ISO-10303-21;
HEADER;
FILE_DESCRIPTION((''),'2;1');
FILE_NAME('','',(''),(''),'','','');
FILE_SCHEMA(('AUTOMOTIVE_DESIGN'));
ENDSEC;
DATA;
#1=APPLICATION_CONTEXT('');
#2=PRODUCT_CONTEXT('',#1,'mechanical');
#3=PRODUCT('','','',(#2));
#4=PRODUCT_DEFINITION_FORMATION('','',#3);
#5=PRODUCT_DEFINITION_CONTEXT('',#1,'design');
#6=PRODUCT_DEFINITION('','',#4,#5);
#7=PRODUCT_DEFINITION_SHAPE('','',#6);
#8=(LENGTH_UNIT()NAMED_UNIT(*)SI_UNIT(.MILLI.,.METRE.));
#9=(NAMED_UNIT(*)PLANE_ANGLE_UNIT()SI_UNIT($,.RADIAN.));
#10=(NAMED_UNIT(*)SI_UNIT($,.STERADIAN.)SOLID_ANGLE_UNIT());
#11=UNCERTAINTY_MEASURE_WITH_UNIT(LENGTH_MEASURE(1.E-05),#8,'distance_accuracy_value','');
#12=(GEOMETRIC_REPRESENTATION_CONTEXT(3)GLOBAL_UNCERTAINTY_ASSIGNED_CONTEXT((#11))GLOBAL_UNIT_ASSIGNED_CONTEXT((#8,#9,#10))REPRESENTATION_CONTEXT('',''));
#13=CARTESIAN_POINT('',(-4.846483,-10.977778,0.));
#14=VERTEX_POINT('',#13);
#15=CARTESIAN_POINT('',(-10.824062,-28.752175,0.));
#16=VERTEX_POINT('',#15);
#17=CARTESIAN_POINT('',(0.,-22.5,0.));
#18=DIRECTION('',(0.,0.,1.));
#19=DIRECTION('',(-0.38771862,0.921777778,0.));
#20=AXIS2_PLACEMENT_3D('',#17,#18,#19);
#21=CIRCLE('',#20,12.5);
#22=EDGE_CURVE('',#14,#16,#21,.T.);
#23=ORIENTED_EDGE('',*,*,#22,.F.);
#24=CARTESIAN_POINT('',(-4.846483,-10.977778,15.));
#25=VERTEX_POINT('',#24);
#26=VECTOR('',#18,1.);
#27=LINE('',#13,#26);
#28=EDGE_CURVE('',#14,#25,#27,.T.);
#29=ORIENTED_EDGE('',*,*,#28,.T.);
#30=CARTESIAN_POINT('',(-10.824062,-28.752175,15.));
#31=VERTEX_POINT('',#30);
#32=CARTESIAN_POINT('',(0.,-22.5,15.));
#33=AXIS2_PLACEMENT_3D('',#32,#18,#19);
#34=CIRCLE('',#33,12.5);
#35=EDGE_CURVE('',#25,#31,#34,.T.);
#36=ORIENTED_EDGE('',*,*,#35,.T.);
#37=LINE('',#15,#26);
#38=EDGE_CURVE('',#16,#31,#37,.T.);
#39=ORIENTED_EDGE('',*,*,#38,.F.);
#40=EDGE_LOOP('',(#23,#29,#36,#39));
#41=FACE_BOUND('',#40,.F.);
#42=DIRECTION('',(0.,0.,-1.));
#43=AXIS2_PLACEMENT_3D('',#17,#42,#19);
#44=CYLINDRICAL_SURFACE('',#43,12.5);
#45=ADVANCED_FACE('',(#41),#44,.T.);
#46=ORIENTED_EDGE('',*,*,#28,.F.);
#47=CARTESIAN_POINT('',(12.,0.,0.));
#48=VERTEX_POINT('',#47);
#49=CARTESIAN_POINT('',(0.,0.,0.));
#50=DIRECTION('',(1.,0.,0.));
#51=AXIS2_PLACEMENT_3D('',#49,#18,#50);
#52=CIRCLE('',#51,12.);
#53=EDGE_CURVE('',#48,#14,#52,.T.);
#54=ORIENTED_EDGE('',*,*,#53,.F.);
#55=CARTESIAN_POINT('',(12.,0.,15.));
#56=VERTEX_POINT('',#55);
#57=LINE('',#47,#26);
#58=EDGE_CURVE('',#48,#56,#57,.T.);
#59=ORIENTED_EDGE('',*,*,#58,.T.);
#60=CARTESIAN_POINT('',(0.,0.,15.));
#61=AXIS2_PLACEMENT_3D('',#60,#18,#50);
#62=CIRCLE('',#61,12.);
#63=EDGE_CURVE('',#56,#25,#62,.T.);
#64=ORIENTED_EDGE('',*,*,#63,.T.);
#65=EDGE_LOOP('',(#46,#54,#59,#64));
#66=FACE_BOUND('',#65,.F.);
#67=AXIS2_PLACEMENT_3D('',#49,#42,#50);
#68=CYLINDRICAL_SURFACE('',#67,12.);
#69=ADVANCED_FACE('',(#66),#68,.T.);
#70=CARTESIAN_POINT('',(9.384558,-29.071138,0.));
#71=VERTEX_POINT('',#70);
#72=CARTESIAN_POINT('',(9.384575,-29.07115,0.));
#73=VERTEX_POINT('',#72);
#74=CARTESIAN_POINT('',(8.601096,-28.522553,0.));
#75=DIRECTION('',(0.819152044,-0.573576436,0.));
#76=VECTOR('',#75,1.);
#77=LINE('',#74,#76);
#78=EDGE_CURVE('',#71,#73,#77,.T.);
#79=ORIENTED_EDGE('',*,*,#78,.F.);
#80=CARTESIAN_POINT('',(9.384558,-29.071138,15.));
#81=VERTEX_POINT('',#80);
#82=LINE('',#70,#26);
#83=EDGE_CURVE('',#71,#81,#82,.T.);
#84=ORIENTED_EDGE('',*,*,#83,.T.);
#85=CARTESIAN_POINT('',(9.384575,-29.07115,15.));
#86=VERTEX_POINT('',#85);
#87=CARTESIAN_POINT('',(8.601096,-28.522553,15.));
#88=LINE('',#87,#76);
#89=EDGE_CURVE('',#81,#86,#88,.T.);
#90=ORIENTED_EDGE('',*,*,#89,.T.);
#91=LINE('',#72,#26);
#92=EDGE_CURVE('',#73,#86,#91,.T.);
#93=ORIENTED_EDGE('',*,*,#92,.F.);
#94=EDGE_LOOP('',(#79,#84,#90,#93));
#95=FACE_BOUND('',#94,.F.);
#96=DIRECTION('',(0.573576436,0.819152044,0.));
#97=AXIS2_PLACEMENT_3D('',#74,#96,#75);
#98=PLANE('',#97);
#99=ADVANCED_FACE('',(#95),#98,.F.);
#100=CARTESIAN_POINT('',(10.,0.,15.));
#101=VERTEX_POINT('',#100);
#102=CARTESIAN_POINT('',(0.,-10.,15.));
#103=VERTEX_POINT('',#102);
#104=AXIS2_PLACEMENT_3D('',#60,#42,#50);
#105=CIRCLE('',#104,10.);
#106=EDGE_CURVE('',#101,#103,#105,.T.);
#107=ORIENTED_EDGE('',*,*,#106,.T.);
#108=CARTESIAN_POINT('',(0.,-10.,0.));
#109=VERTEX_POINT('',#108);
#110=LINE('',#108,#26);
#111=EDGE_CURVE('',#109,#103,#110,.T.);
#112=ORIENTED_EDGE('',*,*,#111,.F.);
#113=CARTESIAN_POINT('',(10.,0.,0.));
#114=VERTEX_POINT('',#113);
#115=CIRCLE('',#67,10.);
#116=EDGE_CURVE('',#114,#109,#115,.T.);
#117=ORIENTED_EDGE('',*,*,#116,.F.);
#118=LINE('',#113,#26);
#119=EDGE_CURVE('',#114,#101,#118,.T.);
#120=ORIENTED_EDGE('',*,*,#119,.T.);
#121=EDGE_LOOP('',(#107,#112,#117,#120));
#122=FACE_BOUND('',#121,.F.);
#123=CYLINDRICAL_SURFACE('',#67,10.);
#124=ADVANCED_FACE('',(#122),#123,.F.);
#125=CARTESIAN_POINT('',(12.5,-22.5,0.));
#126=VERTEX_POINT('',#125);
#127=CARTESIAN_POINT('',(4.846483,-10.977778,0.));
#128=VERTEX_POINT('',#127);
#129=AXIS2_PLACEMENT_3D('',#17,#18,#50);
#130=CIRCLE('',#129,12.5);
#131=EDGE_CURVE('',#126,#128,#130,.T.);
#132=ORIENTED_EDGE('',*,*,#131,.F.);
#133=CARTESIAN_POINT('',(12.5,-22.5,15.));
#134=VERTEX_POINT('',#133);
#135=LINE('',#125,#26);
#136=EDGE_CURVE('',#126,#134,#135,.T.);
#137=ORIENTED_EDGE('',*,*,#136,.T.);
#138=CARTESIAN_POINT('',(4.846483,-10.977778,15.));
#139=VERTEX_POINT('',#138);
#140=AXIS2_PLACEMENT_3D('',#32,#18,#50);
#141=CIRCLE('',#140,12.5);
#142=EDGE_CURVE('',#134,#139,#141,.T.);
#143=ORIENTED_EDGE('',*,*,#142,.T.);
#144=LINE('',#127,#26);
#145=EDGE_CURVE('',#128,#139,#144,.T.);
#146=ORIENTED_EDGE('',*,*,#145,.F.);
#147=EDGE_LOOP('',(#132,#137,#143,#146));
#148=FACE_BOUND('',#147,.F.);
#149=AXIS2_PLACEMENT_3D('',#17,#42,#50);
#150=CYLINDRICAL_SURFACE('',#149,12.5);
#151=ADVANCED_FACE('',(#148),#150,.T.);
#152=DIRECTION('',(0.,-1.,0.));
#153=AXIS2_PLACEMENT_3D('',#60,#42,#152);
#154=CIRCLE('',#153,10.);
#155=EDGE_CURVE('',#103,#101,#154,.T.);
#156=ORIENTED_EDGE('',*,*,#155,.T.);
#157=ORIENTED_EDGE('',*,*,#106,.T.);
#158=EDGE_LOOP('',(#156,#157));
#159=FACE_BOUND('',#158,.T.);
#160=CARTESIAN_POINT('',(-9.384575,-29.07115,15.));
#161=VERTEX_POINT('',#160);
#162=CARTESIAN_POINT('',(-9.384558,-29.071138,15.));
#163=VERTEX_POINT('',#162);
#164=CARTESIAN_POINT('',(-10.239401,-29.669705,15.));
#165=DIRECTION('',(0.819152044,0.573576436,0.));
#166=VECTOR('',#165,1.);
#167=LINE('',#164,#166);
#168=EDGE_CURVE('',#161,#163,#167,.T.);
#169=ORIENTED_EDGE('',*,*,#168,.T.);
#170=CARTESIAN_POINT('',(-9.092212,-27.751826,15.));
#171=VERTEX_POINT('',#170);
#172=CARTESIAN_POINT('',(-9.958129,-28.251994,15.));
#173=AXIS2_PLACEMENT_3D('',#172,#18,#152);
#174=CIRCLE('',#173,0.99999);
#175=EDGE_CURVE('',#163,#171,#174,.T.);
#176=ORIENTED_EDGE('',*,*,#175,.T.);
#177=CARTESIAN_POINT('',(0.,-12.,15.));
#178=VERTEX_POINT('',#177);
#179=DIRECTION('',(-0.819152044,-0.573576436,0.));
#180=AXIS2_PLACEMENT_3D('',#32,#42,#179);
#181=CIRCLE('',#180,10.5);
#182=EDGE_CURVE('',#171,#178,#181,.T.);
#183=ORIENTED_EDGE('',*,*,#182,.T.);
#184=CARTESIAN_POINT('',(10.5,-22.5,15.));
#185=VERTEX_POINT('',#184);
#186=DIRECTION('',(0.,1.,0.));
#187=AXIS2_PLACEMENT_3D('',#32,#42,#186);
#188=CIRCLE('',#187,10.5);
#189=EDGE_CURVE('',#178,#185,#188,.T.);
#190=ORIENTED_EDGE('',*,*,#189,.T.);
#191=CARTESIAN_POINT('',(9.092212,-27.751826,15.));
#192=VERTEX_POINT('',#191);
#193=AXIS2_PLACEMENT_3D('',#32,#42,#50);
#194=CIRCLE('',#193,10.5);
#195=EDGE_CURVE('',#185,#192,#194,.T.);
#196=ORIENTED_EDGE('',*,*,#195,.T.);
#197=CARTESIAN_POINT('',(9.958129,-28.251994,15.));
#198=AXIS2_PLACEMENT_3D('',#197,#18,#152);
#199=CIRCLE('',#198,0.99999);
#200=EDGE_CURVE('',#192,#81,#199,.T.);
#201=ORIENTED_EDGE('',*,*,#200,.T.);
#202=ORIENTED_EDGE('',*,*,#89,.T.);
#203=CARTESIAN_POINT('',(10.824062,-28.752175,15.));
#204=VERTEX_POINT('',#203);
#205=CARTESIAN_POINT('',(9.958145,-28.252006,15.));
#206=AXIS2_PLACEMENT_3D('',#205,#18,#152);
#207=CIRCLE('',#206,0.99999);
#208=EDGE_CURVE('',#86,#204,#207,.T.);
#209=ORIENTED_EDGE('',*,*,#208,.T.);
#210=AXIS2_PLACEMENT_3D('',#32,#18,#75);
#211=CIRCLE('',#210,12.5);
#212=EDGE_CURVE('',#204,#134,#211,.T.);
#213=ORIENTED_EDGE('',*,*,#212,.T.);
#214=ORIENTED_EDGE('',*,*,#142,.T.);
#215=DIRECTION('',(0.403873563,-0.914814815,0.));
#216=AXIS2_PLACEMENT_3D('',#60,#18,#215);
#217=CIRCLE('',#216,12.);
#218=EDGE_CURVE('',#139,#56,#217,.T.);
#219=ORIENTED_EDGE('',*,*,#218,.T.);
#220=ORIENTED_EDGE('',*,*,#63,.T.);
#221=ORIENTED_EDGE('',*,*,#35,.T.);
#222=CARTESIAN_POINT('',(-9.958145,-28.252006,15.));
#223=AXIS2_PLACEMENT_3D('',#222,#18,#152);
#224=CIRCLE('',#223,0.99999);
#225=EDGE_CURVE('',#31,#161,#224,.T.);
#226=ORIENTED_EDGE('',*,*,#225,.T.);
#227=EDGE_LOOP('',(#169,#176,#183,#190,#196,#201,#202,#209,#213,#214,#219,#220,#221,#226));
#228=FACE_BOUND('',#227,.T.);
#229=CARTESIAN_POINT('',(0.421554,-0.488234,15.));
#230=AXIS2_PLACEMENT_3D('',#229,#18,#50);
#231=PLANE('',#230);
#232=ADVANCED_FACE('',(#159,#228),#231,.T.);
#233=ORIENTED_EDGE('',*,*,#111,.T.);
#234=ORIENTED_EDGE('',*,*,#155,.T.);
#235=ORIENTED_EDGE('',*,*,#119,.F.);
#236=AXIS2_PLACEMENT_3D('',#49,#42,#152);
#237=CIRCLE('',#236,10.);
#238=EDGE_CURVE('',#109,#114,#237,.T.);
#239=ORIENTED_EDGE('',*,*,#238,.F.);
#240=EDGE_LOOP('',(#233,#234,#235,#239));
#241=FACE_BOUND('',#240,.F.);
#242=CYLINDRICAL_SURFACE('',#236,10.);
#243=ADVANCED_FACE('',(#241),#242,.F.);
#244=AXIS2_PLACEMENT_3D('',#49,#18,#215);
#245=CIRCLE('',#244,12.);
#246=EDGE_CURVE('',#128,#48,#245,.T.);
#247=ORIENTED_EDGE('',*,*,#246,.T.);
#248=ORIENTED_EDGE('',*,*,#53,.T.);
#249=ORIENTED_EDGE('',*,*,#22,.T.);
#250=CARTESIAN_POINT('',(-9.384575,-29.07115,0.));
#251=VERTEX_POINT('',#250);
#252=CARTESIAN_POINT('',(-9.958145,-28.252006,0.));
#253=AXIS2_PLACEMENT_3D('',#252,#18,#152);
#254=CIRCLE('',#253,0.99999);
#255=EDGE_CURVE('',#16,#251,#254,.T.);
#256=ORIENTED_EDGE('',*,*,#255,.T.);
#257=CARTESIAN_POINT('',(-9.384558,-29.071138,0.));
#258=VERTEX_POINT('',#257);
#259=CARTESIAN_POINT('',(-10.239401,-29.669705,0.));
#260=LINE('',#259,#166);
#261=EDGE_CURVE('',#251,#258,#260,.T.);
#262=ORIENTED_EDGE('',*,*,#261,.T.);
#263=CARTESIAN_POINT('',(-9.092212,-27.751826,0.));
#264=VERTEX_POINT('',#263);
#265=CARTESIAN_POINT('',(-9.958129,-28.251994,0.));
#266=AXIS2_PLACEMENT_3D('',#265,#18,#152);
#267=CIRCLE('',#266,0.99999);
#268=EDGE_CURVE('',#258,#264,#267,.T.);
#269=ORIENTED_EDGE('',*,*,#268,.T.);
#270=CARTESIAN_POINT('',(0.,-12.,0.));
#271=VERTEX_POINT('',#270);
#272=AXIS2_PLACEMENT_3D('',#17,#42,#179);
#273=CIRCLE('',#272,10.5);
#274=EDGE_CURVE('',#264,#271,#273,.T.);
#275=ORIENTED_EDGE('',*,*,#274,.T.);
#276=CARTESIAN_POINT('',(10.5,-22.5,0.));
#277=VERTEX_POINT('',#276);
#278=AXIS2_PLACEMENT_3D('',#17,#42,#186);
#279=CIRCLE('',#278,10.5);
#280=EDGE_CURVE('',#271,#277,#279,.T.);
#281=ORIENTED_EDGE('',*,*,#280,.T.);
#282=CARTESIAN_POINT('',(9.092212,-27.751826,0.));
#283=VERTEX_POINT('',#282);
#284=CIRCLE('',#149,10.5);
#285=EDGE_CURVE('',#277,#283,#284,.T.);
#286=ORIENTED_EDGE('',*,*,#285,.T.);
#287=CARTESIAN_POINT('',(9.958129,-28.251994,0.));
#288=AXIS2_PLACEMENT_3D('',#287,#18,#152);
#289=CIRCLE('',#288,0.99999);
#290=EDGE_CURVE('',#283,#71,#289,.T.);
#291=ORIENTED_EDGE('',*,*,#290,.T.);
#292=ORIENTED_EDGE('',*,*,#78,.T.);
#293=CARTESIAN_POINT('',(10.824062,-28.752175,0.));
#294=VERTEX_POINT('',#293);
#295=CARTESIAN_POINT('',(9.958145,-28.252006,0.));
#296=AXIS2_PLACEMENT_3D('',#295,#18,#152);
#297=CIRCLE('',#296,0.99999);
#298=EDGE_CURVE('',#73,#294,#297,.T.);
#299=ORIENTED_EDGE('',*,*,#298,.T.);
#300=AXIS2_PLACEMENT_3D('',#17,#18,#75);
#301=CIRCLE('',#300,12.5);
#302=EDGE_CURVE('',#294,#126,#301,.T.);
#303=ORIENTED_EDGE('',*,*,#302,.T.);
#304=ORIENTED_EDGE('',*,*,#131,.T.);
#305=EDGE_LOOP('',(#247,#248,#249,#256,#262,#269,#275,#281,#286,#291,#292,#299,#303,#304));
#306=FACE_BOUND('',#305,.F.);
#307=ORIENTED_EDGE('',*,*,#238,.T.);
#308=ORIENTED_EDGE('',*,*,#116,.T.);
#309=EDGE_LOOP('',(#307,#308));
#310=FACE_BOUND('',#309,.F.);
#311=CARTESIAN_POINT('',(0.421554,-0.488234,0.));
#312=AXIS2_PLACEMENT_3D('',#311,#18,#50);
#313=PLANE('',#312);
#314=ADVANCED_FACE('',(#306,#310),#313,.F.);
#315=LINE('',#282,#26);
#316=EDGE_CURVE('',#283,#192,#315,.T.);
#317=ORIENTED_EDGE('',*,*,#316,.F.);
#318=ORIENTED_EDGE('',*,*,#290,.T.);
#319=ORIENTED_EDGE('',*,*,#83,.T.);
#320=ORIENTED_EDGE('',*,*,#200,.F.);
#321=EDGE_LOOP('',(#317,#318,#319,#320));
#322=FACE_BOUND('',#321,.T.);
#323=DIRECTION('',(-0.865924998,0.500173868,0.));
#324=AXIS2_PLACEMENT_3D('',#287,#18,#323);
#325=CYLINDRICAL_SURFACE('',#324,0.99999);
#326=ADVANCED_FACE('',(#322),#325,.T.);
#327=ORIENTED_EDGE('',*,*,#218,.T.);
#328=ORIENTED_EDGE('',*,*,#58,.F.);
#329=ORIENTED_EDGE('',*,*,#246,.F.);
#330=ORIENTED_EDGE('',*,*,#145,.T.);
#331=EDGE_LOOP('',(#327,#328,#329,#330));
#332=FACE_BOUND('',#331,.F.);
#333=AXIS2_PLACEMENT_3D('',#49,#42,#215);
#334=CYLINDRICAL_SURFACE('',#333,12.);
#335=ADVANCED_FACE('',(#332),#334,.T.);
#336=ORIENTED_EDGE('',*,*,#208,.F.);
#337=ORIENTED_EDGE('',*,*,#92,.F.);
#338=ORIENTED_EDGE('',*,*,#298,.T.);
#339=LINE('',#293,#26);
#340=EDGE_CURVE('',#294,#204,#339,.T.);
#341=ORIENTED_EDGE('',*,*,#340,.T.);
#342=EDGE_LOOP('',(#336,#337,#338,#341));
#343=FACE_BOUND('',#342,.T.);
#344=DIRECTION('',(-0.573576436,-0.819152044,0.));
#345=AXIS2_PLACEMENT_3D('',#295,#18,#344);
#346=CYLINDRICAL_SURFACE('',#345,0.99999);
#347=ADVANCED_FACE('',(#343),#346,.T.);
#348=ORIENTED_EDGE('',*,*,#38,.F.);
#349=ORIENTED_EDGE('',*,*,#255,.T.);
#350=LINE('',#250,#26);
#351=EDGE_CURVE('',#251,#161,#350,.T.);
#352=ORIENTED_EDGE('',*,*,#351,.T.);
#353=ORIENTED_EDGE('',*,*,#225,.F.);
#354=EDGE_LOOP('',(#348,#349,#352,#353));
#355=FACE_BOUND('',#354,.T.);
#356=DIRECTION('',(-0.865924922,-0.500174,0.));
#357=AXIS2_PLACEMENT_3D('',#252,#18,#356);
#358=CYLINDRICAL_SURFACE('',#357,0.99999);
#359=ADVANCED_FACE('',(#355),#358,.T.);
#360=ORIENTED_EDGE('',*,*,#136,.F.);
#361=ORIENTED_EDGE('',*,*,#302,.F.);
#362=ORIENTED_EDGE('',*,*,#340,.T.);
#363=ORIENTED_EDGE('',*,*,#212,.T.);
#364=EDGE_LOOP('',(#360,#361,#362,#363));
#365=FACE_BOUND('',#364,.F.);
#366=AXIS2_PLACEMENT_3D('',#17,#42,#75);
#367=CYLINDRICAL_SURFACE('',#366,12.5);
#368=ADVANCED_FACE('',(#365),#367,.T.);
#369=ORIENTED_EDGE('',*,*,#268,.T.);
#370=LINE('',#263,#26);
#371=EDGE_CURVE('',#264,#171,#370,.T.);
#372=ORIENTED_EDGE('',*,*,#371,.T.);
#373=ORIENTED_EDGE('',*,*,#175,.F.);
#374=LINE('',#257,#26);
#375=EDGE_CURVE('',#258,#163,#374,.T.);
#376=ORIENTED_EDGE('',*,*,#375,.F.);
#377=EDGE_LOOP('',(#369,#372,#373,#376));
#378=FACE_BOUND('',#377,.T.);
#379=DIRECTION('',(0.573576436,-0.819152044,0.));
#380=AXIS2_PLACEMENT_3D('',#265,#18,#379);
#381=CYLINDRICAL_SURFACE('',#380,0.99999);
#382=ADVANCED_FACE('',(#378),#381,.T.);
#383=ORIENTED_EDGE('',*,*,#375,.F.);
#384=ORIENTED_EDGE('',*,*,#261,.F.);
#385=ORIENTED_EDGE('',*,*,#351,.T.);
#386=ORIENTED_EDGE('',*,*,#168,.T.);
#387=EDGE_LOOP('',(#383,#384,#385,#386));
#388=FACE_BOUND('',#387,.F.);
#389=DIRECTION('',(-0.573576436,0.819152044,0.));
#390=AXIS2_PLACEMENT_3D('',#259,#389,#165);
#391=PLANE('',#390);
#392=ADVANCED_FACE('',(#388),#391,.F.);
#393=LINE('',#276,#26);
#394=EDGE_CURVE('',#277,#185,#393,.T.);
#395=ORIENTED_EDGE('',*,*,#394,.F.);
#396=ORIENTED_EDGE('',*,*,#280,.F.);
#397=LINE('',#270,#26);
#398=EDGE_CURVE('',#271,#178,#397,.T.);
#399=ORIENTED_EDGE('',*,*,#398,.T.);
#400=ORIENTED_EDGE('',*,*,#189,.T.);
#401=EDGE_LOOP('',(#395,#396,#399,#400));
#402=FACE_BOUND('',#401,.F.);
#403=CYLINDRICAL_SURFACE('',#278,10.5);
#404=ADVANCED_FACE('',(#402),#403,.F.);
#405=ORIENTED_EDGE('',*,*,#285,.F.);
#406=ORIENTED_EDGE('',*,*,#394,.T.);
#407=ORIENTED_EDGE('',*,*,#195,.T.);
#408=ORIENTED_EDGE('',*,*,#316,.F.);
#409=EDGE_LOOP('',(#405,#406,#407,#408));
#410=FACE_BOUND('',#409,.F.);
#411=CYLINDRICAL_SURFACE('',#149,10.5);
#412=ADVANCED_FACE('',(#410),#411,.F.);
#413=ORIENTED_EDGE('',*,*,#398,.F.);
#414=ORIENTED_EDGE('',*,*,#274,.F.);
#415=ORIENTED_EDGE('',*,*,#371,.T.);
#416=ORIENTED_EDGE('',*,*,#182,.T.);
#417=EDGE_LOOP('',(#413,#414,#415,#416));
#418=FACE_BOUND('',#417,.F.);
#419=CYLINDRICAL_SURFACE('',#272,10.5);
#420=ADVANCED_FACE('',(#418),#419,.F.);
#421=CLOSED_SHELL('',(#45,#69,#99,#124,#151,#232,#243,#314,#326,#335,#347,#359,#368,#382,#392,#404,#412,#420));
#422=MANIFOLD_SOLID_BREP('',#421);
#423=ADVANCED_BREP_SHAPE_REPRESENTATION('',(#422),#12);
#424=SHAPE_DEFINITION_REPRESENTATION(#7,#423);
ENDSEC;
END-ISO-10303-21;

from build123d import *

# Parameters (mm, degrees)
F1_DEPTH = 15
F2_R     = 0.99999


# Not quite as in the source:
# - a fillet or chamfer is up to 0.001 mm smaller than in the source, because OpenCascade refuses the exact size


with BuildPart() as f1:
    # F0 (on Top) → F1 (new body)
    with BuildSketch(Plane.XY):
        with BuildLine():
            ThreePointArc((-4.8464827516, -10.9777777778), (-2.4720661624, -10.2468824829), (0, -10))
            ThreePointArc((0, -10), (2.4720661624, -10.2468824829), (4.8464827516, -10.9777777778))
            ThreePointArc((4.8464827516, -10.9777777778), (10.0538001029, -6.5514199598), (12, 0))
            ThreePointArc((12, 0), (-6.5514199598, 10.0538001029), (-4.8464827516, -10.9777777778))
        make_face()
        with BuildLine():
            ThreePointArc((0, -10), (-7.0710678119, 7.0710678119), (10, 0))
            ThreePointArc((10, 0), (7.0710678119, -7.0710678119), (0, -10))
        make_face(mode=Mode.SUBTRACT)
        with BuildLine():
            ThreePointArc((4.8464827516, -10.9777777778), (2.4720661624, -10.2468824829), (0, -10))
            ThreePointArc((0, -10), (-2.4720661624, -10.2468824829), (-4.8464827516, -10.9777777778))
            ThreePointArc((-4.8464827516, -10.9777777778), (-2.4765567495, -11.7416637095), (0, -12))
            ThreePointArc((0, -12), (2.4765567495, -11.7416637095), (4.8464827516, -10.9777777778))
        make_face()
        with BuildLine():
            ThreePointArc((12.5, -22.5), (10.412277234, -15.5837522599), (4.8464827516, -10.9777777778))
            ThreePointArc((4.8464827516, -10.9777777778), (2.4765567495, -11.7416637095), (0, -12))
            ThreePointArc((0, -12), (7.4246212025, -15.0753787975), (10.5, -22.5))
            ThreePointArc((10.5, -22.5), (10.0140279829, -25.6574108948), (8.601096465, -28.5225525817))
            Line((8.601096465, -28.5225525817), (10.2394005536, -29.6697054544))
            ThreePointArc((10.2394005536, -29.6697054544), (11.9214618844, -26.2588224938), (12.5, -22.5))
        make_face()
        with BuildLine():
            ThreePointArc((0, -12), (-2.4765567495, -11.7416637095), (-4.8464827516, -10.9777777778))
            ThreePointArc((-4.8464827516, -10.9777777778), (-12.0101211002, -19.034889445), (-10.2394005536, -29.6697054544))
            Line((-10.2394005536, -29.6697054544), (-8.601096465, -28.5225525817))
            ThreePointArc((-8.601096465, -28.5225525817), (-9.3136137484, -17.651639561), (0, -12))
        make_face()
    extrude(amount=F1_DEPTH)

    # F2 (radius 1 in the source; OpenCascade refuses exactly that, so slightly less here)
    f2_edges = [f1.edges().sort_by_distance(p)[0] for p in [
        (-8.601096, -28.522553, 7.5),
        (-10.239401, -29.669705, 7.5),
        (8.601096, -28.522553, 7.5),
        (10.239401, -29.669705, 7.5),
    ]]
    fillet(f2_edges, radius=F2_R)


solid = f1.part
